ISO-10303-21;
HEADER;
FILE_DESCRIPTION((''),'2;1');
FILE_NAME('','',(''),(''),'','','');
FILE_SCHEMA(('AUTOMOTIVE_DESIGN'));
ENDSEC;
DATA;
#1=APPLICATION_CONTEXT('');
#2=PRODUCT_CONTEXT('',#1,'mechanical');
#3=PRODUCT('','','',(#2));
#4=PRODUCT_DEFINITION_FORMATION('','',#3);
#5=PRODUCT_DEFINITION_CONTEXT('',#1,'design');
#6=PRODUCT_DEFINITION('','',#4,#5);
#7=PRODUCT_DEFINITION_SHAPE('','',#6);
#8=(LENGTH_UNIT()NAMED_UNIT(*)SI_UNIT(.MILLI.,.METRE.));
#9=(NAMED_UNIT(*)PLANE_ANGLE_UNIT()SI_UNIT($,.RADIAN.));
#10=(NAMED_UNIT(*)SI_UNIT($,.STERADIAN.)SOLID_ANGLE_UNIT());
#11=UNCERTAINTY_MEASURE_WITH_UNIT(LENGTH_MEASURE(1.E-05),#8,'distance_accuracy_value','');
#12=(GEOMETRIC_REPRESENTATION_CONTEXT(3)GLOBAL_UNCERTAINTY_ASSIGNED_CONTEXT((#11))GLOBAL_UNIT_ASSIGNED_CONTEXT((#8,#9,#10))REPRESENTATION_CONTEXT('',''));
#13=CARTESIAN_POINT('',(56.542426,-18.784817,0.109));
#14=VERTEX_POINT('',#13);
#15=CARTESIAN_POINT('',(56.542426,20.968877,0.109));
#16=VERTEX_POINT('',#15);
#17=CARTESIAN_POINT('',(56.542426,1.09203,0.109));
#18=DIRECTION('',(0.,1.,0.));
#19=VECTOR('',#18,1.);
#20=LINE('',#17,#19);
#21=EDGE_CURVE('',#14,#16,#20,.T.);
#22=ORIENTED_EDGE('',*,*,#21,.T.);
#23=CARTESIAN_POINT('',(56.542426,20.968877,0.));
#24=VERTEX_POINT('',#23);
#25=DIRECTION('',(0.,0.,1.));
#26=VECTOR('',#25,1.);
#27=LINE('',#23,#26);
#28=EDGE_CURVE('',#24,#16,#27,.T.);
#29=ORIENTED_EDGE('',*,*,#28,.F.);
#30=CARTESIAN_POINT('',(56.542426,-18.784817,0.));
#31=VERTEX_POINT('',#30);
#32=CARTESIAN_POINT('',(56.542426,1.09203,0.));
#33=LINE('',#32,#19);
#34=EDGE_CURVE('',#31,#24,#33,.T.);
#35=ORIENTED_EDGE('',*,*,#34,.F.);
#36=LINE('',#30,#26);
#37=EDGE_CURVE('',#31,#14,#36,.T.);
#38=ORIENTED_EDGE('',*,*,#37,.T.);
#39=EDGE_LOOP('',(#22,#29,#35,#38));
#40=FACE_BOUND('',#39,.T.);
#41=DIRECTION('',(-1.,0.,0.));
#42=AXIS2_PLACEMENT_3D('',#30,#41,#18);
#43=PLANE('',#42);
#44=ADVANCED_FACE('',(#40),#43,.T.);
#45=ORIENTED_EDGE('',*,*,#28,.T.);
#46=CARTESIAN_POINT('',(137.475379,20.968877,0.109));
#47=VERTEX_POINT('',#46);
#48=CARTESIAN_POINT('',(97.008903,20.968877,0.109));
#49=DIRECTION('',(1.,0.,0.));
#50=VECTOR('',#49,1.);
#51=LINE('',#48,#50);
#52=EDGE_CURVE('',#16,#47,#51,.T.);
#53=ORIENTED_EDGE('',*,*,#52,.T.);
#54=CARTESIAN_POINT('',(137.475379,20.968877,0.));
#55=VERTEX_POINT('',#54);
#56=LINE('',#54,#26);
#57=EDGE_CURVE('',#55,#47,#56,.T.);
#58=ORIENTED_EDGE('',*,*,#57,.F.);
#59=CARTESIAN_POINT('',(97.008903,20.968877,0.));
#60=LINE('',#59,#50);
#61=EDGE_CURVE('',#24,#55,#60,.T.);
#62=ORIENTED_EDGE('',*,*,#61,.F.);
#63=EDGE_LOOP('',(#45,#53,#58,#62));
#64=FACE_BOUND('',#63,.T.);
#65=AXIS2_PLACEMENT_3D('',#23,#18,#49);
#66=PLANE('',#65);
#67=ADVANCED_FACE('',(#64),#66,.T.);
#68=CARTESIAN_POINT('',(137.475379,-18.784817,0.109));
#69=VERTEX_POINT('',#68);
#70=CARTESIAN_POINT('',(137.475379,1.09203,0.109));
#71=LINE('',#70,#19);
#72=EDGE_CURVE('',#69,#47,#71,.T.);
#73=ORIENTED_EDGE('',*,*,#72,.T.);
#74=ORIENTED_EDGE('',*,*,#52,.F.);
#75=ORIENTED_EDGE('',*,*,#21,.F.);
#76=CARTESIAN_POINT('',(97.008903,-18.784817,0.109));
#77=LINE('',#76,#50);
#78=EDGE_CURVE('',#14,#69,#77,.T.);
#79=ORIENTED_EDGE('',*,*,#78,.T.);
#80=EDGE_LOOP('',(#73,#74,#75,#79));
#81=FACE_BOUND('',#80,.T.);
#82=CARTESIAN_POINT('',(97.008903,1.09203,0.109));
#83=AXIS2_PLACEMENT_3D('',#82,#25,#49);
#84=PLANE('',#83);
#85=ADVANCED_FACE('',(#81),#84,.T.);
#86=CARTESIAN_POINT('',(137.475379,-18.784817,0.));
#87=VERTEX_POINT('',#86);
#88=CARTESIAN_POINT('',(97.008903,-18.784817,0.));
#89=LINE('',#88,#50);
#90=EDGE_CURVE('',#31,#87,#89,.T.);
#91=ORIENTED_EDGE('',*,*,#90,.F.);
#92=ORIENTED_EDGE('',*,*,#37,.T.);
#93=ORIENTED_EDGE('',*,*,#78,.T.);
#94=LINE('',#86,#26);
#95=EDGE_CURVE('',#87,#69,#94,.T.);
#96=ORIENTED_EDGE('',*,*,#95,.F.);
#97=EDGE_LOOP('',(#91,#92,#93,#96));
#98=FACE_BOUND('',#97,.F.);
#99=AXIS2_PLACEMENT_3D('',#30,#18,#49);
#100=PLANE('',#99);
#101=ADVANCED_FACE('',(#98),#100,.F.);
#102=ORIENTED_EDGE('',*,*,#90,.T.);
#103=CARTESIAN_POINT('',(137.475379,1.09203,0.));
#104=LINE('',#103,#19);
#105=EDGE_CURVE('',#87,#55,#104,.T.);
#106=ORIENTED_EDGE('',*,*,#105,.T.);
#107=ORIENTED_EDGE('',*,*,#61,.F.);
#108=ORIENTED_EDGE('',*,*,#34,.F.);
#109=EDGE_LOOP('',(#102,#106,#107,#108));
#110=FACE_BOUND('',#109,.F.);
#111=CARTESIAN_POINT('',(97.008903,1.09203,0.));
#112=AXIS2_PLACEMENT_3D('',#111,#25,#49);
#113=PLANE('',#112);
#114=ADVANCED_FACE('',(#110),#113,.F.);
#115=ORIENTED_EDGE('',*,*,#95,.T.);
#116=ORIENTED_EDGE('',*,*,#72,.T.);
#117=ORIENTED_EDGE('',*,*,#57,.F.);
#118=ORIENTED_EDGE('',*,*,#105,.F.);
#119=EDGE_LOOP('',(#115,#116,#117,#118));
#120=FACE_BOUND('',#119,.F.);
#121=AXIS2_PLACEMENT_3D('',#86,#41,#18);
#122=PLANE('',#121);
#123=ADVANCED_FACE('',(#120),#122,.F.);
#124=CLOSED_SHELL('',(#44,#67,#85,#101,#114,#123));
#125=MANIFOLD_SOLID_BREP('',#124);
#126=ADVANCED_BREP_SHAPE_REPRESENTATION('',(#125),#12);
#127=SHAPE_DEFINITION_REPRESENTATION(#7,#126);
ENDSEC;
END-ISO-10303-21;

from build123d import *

# Parameters (mm, degrees)
F0_W     = 80.9329524636
F0_H     = 39.7536940873
F1_DEPTH = 0.109


with BuildPart() as f1:
    # F0 (on Top) → F1 (new body)
    with BuildSketch(Plane.XY):
        with Locations((16.0759501159, 1.0920297354)):
            Rectangle(F0_W, F0_H)
    extrude(amount=F1_DEPTH)


with BuildPart() as f1_1:
    # F2: moved
    add(f1.part.moved(Location((80.9329524636, 0, 0))))


solid = f1_1.part
